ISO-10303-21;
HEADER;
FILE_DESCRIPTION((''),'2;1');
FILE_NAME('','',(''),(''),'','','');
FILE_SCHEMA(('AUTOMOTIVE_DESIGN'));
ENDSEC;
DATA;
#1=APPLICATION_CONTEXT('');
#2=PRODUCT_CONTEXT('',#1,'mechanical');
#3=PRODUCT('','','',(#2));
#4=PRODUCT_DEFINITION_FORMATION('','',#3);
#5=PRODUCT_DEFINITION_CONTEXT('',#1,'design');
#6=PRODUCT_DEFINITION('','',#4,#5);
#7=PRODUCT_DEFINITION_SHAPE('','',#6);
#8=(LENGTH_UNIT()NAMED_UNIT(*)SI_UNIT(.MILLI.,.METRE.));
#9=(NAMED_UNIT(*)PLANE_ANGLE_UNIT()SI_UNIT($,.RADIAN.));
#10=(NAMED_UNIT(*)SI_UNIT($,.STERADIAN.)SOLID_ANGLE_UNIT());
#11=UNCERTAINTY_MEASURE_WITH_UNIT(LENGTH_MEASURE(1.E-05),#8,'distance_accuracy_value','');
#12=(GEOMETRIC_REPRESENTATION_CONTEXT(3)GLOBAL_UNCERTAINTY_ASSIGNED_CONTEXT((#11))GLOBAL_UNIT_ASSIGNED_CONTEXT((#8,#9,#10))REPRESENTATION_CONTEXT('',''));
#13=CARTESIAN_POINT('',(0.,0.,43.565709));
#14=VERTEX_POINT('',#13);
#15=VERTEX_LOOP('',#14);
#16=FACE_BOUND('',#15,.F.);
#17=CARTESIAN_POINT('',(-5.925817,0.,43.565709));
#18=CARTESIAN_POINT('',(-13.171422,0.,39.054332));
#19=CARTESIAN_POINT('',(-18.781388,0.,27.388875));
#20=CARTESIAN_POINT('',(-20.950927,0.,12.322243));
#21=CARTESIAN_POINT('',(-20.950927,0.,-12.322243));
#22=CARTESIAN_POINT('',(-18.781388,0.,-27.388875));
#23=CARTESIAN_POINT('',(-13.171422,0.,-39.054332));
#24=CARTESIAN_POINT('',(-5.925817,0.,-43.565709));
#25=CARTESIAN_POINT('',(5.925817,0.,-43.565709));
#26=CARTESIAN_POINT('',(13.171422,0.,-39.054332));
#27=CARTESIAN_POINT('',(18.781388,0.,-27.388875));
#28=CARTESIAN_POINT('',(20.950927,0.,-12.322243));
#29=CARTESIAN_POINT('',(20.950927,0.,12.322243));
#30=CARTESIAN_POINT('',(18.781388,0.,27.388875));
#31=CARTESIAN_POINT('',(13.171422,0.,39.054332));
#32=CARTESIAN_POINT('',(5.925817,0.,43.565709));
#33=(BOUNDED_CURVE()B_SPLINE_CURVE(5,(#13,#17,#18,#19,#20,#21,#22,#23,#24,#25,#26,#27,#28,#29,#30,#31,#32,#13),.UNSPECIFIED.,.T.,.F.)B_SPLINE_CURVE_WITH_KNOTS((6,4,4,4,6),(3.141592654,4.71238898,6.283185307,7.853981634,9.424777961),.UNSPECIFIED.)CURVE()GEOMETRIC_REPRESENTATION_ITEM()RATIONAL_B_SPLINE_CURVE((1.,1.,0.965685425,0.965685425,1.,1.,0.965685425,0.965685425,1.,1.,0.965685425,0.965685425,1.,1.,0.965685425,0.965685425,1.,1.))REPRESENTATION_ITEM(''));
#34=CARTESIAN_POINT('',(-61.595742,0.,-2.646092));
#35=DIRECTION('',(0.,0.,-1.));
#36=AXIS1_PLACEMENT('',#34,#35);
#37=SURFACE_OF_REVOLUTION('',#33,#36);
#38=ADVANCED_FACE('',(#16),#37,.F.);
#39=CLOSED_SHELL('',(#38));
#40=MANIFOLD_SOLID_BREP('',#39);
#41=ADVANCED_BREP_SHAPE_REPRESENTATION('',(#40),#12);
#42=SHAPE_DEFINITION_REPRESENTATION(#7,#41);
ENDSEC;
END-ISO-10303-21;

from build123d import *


with BuildPart() as f2:
    # F0 (on Front) → F2 (revolve)
    with BuildSketch(Plane.XZ):
        with BuildLine():
            Line((0, 43.5657091439), (0, -43.5657091439))
            add(Edge.make_bspline(
                [(0, -43.5657091439), (20.9509272428, -43.5657091439), (20.9509272428, 0), (20.9509272428, 43.5657091439), (0, 43.5657091439)],
                knots=[0, 0, 0, 1.5707963268, 1.5707963268, 3.1415926536, 3.1415926536, 3.1415926536], degree=2, weights=[1, 0.7071067812, 1, 0.7071067812, 1]))
        make_face()
        with BuildLine():
            add(Edge.make_bspline(
                [(0, 43.5657091439), (-20.9509272428, 43.5657091439), (-20.9509272428, 0), (-20.9509272428, -43.5657091439), (0, -43.5657091439)],
                knots=[3.1415926536, 3.1415926536, 3.1415926536, 4.7123889804, 4.7123889804, 6.2831853072, 6.2831853072, 6.2831853072], degree=2, weights=[1, 0.7071067812, 1, 0.7071067812, 1]))
            Line((0, -43.5657091439), (0, 43.5657091439))
        make_face()
    revolve(axis=Axis((-61.5957416594, 0, -2.6460923254), (0, 0, -1)))


solid = f2.part
